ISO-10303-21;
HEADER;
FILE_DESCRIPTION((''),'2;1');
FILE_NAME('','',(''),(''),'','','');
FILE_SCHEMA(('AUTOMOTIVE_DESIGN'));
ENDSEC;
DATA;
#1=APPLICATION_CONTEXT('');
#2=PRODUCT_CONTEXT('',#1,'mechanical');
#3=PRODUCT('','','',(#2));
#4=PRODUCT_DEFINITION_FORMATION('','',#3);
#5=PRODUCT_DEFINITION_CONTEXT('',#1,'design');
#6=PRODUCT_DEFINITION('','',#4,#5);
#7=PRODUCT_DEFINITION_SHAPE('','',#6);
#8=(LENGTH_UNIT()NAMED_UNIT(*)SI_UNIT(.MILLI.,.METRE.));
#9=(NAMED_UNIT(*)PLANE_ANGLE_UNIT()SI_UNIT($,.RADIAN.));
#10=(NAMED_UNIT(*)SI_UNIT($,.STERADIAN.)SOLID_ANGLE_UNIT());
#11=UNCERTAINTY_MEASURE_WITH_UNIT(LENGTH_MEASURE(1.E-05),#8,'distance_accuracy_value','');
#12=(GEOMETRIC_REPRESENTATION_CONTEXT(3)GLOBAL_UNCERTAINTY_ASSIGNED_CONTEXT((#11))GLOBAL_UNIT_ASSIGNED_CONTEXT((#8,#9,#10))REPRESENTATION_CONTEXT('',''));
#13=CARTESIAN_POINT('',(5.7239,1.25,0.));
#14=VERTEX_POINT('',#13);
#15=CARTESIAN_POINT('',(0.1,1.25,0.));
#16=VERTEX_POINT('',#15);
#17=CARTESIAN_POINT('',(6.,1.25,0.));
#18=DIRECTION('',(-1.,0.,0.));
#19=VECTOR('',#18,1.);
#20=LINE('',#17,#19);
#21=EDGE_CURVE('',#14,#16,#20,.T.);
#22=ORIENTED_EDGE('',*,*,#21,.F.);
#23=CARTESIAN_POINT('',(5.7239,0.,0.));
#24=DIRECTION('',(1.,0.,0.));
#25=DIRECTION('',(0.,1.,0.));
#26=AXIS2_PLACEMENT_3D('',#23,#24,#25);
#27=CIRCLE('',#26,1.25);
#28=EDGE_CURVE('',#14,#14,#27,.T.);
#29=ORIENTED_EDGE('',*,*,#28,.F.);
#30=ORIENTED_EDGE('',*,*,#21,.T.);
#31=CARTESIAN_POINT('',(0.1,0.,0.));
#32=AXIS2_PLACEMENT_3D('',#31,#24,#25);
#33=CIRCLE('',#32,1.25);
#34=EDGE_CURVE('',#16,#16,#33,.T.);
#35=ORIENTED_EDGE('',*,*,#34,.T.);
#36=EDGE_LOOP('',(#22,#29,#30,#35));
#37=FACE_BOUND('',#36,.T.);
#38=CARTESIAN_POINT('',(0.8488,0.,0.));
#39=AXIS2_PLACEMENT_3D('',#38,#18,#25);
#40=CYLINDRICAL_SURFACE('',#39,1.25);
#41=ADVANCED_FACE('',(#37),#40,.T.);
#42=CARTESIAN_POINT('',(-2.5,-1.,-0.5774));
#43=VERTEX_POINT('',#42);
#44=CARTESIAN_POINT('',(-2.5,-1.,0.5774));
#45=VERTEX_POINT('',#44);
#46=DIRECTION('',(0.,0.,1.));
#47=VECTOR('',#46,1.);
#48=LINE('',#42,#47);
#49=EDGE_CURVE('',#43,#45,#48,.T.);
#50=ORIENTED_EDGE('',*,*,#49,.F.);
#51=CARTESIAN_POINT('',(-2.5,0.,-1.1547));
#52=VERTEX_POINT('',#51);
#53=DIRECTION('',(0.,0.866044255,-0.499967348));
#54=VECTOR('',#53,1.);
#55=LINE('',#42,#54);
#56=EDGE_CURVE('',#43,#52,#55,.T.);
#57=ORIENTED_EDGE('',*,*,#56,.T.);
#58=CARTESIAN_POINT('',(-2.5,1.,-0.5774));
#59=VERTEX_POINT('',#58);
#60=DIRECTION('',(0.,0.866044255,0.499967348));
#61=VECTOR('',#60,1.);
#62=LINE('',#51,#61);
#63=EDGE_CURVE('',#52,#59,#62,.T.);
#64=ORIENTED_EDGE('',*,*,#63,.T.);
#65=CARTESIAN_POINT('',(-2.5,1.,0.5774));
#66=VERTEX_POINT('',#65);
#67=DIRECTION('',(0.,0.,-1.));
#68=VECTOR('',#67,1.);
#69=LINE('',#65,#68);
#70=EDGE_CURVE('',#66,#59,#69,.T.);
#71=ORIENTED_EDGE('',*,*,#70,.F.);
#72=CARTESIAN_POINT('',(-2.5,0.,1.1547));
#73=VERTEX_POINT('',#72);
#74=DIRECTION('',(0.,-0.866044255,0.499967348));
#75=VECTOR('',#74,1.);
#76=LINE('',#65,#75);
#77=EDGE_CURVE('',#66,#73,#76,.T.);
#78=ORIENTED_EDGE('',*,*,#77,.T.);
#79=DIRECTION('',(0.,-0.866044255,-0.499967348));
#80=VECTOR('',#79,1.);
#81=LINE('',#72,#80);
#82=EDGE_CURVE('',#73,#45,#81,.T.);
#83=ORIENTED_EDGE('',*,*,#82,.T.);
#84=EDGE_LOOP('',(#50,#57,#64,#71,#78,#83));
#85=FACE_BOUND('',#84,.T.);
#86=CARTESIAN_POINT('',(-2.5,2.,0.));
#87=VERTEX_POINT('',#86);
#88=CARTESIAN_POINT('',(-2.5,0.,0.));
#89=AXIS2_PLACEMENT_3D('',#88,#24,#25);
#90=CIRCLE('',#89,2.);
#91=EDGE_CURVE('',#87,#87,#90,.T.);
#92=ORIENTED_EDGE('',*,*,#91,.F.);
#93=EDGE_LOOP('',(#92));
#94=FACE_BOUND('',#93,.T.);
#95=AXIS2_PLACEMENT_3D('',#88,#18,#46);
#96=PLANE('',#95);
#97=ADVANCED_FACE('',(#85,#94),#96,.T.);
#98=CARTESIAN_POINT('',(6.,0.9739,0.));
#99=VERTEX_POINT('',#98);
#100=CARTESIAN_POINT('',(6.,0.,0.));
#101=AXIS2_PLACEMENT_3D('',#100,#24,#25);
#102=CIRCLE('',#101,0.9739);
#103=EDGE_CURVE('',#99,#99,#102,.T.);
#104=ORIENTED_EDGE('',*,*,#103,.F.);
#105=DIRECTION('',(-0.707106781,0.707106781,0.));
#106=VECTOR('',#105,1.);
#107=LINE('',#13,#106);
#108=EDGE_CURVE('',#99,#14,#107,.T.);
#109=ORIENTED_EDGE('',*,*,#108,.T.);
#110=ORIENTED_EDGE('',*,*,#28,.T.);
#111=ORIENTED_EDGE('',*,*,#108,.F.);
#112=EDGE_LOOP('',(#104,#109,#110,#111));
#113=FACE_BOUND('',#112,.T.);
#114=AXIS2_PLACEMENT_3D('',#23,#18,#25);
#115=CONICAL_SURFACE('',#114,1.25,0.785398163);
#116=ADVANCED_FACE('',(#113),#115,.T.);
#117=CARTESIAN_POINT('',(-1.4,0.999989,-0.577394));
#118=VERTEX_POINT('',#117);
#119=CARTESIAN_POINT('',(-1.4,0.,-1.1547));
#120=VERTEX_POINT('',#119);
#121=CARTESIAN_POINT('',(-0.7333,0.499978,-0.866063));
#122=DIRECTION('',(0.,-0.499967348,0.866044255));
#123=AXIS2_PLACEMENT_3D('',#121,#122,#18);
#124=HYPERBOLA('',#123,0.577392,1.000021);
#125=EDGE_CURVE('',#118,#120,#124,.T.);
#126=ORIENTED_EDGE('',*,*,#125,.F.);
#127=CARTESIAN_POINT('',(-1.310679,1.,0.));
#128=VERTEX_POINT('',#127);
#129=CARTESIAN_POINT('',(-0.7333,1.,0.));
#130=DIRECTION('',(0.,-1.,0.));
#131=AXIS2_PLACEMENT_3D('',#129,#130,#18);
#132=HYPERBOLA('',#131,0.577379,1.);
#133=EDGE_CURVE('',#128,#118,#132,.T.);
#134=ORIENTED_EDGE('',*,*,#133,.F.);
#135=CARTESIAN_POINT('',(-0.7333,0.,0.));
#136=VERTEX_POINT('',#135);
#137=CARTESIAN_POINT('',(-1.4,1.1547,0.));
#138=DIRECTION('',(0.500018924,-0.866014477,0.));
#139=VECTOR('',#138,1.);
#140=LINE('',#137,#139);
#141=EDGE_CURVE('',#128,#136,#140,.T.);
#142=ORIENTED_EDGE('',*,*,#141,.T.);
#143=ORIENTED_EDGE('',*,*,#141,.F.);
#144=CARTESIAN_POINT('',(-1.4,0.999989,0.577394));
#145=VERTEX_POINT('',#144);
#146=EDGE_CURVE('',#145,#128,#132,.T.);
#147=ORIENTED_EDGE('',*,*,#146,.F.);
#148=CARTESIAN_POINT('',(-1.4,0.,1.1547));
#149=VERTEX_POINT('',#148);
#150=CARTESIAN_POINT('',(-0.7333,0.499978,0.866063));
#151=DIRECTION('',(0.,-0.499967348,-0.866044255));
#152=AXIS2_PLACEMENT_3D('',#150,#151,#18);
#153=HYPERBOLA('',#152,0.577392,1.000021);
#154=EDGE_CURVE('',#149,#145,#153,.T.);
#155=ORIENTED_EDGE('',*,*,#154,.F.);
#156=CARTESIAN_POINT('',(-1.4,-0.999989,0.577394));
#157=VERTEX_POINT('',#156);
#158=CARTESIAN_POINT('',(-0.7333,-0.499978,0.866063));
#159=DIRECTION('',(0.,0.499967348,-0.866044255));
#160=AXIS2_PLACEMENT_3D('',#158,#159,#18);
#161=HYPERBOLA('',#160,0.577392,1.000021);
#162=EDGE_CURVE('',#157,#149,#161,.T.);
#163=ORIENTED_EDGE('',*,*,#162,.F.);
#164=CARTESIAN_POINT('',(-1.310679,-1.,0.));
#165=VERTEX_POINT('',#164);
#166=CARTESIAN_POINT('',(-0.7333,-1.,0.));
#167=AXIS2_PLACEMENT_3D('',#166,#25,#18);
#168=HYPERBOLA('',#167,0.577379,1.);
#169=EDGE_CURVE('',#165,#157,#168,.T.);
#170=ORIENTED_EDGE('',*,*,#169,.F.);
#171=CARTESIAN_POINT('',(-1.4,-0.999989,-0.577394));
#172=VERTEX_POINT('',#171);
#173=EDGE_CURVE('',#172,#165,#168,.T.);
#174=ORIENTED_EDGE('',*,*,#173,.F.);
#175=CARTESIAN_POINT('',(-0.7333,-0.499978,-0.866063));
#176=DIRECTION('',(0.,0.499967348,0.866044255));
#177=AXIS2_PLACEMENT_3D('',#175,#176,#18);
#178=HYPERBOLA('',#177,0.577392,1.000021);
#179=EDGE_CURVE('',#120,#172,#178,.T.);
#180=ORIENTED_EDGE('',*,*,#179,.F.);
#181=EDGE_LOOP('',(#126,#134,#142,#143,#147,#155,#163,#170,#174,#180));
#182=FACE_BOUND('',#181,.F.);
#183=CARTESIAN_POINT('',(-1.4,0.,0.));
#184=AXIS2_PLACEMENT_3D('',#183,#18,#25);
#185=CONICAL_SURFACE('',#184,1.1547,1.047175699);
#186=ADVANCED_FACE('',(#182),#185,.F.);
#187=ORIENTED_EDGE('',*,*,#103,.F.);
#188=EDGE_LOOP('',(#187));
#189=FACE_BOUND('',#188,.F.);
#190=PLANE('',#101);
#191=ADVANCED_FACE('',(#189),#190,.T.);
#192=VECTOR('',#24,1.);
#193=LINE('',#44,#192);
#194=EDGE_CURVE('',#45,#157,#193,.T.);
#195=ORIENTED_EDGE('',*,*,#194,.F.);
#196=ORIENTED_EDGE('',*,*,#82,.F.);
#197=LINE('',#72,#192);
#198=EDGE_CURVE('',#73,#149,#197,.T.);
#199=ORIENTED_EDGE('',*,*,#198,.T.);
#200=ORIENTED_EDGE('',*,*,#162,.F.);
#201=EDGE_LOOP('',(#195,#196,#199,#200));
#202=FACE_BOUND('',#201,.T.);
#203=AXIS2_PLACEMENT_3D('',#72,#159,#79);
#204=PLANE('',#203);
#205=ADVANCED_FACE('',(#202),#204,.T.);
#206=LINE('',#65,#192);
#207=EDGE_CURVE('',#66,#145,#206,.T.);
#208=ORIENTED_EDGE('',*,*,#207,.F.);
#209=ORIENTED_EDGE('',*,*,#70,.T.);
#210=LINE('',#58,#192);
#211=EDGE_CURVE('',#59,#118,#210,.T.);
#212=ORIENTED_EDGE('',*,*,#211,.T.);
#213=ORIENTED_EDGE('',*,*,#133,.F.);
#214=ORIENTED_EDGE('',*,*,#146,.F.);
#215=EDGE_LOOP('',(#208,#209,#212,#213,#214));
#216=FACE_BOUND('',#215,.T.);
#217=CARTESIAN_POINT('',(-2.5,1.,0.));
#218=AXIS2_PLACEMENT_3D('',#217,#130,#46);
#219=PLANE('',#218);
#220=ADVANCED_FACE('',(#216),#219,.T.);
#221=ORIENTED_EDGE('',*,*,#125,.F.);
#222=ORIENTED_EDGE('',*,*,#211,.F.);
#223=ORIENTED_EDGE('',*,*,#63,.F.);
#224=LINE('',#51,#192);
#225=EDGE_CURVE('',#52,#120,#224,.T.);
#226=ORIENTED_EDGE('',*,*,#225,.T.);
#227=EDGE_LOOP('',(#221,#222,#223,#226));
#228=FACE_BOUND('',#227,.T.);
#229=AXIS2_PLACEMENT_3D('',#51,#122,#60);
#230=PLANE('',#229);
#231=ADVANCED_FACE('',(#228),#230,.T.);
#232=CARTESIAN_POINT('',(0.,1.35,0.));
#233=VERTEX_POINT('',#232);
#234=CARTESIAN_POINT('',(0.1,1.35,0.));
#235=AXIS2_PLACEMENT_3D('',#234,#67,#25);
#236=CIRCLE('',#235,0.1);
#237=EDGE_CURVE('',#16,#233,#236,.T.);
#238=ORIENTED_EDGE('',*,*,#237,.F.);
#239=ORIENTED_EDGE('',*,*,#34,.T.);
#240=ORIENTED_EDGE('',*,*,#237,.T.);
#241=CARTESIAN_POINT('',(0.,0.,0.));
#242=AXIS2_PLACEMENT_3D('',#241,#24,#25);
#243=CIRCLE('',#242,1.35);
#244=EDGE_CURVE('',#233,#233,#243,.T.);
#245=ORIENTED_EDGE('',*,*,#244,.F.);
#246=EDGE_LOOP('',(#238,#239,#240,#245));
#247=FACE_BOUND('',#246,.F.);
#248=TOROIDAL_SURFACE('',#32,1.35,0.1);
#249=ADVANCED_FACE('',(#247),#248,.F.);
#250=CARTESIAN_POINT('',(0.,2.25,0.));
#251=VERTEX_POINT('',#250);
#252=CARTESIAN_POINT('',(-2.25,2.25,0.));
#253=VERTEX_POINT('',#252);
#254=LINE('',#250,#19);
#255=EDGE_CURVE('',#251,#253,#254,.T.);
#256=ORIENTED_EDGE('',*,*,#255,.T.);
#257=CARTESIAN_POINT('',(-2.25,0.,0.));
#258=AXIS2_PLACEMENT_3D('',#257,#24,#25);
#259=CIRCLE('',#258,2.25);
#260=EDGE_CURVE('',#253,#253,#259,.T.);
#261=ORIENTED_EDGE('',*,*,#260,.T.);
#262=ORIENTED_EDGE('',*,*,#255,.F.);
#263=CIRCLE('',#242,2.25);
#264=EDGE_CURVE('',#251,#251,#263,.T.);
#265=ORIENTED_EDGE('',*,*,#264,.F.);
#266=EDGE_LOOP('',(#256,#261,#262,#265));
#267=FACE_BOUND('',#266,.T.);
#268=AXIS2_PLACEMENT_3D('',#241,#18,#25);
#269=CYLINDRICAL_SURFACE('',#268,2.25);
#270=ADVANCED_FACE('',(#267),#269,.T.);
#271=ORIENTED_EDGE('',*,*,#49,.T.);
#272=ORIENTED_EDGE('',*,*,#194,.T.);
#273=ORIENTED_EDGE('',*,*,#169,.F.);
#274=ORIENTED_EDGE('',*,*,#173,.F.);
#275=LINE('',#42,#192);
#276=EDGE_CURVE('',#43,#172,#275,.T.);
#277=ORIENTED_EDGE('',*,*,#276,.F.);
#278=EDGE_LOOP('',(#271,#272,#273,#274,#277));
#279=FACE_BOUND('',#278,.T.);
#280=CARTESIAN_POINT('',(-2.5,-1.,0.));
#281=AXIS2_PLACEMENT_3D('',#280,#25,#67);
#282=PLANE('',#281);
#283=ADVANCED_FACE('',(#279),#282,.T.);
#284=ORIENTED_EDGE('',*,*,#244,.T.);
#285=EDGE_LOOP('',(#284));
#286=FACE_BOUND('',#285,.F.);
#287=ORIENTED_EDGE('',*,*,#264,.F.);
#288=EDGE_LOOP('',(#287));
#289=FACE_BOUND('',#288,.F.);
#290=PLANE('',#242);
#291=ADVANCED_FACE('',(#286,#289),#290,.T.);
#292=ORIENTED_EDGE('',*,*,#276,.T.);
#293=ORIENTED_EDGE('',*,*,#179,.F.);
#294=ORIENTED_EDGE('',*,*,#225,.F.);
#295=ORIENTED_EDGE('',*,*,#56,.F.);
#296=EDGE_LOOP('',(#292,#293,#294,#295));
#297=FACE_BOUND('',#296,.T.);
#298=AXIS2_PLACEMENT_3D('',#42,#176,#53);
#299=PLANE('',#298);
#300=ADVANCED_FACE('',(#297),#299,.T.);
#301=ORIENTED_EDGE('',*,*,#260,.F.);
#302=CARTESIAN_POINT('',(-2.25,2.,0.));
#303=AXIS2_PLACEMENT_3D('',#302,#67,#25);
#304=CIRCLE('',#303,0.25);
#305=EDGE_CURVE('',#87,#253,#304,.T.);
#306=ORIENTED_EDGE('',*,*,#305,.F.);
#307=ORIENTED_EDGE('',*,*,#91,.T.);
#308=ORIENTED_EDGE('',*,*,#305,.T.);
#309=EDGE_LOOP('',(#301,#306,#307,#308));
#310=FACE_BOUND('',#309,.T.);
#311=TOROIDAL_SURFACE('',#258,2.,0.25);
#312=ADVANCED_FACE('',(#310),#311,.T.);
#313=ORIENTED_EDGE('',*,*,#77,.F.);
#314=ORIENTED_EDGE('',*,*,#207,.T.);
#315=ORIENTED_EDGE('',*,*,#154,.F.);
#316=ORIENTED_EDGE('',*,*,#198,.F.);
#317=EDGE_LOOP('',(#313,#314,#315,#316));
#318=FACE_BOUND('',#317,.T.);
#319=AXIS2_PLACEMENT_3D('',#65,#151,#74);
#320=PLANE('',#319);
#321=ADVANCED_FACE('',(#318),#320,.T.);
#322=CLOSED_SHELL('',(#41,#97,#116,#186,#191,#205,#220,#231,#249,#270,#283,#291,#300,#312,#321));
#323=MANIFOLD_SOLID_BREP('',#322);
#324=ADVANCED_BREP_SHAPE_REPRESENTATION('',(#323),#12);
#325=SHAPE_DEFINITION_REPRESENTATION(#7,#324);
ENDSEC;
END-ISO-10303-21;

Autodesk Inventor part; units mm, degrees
ref_plane "YZ Plane" through (0, 0, 0) normal (1, 0, 0) x (0, 1, 0)
ref_plane "XZ Plane" through (0, 0, 0) normal (0, 1, 0) x (-1, 0, 0)
sketch "Sketch1" plane through (0, 0, 0) normal (0, 0, 1) x (1, 0, 0)
  line L0 (-0.7333, 0) -> (6, 0)
  line L1 (6, 0) -> (6, 1.25)
  line L2 (6, 1.25) -> (1.125, 1.25)
  line L3 (1.125, 1.25) -> (0.8488, 1.25)
  line L4 (0.8488, 1.25) -> (0, 1.25)
  line L5 (0, 1.25) -> (0, 2.25)
  line L6 (0, 2.25) -> (-2.5, 2.25)
  line L7 (-2.5, 2.25) -> (-2.5, 1.1547)
  line L8 (-2.5, 1.1547) -> (-1.4, 1.1547)
  line L9 (-1.4, 1.1547) -> (-0.7333, 0)
  line L10 (-4.2, 0) -> (7.7, 0) projected
  line L11 (0, -0.45) -> (0, 2.7) projected
  line L12 (1.125, 1.25) -> (0, 1.25) construction
  dimension "d1" = 4.875
  dimension "d2" = 0.2762
  dimension "d3" = 2.5
  dimension "d4" = 1.1
  dimension "d5" = 60
  dimension "d6" = 2.5
  dimension "d7" = 2.5
  dimension "d8" = 2.3094
  dimension "d9" = 4.5
  dimension "d26" = 6
revolve "Body" add sketch "Sketch1" angle 360 about axis through (-0.7333, 0, 0) along (1, 0, 0)
sketch "Sketch2" plane through (-2.5, 0, 0) normal (-1, 0, 0) x (0, 0, 1)
  circle A0 centre (0, 0) radius 1.1547 projected
  line L0 (0, -3.15) -> (0, 3.15) projected
  line L1 (-3.15, 0) -> (3.15, 0) projected
  line L2 (1.1547, 0) -> (0.5774, -1)
  line L3 (0.5774, -1) -> (-0.5774, -1)
  line L4 (-0.5774, -1) -> (-1.1547, 0)
  line L5 (-1.1547, 0) -> (-0.5774, 1)
  line L6 (-0.5774, 1) -> (0.5774, 1)
  line L7 (0.5774, 1) -> (1.1547, 0)
extrude "Slot" add sketch "Sketch2" against normal up to next contours L7 A0 | A0 L2 | L6 L0 A0 | A0 L0 L3 | L0 L6 A0 | A0 L3 L0 | L4 A0 | A0 L5
fillet "Fillet1" radius 0.25 1 edges at (-2.5, -2.25, 0)
thread "Thread" size "M2.5x0.45" class "6g" standard "ISO Metric profile" length 4.875
chamfer "Chamfer1" distance 0.2761 distance2 0.2761 1 edges at (6, -1.25, 0) measured on face at (6, -0.1825, -0.5629)
ref_plane "Work Plane1" through (29, 0, 0) normal (0, -1, 0) x (1, 0, 0)
fillet "Fillet2" radius 0.1 1 edges at (0, -1.25, 0)
equation "\"d30\" = R"
equation "\"d17\" = RR"
equation "\"d13\" = GEL"
equation "\"d15\" = -0.5 * SPD + 0.5 * GD"
equation "\"d16\" = GUL"
equation "\"d1\" = GEL"
equation "\"d3\" = KOH"
equation "\"d4\" = INTI"
equation "\"d6\" = GD"
equation "\"d7\" = BDM"
equation "\"d8\" = 1.1547 * SW"
equation "\"d9\" = KOD"
equation "\"d26\" = NLG"
equation "\"GD\" = NND"
equation "\"NLG\" = 6"
equation "\"GEL\" = 4.875"
equation "\"KOD\" = 4.5"
equation "\"KOH\" = 2.5"
equation "\"INTI\" = 1.1"
equation "\"GAL\" = 0.61345 * PTC"
equation "\"GUL\" = 0.61345 * PTC"
equation "\"BDM\" = NND"
equation "\"SW\" = 2"
equation "\"RR\" = 0.25"
equation "\"SPD\" = NND - 1.2269 * PTC"
equation "\"R\" = 0.1"
equation "\"TOA\" = 30deg"
equation "\"GD1\" = THREADDIA - 1.2269 * PTC"
equation "\"THREADDIA\" = 2.5"
equation "\"FAWI\" = 45deg"
equation "\"ANG\" = 120deg"
equation "\"PTC\" = 0.45"
equation "\"NND\" = 2.5"
equation "\"E0\" = 1.155 * SW"
properties part number "DIN 912 - M2,5 x 6" material "Steel, Mild"
